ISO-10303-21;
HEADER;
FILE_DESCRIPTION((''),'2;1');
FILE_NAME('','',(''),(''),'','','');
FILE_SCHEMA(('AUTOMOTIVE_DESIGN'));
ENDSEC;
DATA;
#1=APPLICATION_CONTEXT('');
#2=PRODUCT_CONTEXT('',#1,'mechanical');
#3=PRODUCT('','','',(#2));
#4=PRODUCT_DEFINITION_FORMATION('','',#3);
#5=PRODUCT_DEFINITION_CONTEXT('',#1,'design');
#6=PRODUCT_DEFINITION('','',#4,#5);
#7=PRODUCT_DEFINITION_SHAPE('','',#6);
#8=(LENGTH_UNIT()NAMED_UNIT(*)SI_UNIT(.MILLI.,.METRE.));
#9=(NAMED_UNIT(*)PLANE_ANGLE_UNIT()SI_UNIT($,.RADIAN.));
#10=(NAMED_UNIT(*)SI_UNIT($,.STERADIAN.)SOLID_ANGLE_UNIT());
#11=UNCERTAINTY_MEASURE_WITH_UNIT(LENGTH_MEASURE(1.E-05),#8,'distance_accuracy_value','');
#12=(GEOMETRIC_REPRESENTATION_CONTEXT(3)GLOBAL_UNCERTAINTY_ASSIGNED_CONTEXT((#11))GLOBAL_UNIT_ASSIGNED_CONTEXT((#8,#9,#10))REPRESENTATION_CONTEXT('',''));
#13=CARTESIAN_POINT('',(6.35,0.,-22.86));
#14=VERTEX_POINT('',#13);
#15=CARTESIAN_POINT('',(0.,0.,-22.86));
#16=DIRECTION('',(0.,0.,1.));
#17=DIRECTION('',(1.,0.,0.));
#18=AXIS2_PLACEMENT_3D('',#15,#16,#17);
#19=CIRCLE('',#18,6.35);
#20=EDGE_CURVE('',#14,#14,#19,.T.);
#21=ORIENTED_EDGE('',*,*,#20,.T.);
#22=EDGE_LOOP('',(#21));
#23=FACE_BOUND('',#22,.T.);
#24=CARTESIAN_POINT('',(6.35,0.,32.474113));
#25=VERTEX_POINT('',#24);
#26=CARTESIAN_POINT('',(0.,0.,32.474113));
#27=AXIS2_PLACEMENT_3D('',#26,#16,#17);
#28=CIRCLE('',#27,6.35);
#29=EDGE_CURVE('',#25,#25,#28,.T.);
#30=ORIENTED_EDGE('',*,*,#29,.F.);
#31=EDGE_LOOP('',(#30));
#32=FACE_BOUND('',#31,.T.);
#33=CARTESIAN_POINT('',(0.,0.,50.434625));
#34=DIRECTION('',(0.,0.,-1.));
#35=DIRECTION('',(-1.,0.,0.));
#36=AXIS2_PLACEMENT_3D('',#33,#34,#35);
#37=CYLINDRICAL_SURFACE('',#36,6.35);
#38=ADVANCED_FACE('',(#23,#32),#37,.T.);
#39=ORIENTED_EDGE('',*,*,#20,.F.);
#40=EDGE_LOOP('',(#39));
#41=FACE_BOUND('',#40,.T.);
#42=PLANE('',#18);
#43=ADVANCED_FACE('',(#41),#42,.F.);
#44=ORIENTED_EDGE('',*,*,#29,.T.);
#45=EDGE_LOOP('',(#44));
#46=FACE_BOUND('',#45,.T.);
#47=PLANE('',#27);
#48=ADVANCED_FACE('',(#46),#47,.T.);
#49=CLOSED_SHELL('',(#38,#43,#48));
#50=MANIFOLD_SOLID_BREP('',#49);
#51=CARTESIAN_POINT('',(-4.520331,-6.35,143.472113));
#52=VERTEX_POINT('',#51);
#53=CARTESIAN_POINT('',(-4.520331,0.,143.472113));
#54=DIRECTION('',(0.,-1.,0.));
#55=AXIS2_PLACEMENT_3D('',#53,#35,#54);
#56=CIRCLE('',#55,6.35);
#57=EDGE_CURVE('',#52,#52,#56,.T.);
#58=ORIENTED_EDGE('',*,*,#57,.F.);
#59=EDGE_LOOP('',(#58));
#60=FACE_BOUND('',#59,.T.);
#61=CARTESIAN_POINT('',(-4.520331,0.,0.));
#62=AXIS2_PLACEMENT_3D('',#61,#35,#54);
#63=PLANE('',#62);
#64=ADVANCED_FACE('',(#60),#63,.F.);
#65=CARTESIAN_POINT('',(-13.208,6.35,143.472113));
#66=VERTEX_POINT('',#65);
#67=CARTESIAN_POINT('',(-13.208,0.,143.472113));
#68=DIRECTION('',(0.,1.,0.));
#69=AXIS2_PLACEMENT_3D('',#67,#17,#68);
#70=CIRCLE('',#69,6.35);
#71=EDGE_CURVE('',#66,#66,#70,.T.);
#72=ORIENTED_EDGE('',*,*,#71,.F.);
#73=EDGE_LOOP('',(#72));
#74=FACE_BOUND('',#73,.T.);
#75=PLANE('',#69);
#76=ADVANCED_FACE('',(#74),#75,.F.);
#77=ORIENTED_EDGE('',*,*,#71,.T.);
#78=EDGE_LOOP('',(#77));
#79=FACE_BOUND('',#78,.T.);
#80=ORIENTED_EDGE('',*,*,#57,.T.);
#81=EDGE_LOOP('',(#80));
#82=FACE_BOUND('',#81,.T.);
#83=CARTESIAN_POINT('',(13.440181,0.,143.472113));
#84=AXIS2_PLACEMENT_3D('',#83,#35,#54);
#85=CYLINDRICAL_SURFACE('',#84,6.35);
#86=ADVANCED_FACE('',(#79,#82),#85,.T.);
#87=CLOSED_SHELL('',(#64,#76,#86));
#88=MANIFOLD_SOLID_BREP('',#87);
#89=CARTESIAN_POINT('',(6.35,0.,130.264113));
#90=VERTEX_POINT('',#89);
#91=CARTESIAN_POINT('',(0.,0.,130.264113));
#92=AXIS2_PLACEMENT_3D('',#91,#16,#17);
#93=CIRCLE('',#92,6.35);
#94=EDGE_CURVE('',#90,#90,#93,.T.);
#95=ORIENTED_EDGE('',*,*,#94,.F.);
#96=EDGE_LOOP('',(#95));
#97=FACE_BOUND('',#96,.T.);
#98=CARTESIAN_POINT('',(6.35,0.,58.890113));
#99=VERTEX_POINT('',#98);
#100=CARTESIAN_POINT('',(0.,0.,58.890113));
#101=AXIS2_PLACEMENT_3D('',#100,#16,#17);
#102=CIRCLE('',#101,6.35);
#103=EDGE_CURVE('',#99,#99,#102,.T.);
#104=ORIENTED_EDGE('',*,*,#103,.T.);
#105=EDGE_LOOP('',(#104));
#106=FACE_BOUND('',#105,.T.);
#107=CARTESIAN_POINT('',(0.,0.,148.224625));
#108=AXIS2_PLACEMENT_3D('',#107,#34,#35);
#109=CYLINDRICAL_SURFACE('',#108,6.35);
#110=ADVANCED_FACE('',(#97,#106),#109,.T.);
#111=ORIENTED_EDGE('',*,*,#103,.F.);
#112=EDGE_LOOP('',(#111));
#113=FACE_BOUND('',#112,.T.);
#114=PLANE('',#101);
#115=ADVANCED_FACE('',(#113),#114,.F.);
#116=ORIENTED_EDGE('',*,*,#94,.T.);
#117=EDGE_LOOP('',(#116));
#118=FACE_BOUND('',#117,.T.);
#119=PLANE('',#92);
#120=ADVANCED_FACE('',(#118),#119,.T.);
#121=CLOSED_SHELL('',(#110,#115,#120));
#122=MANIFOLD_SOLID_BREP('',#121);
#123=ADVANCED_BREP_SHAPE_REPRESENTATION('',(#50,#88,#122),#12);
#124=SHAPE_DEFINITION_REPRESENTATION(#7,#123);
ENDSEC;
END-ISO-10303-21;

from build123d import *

# Parameters (mm, degrees)
BOSS_EXTRUDE1_OUTLINE_R = 6.35
BOSS_EXTRUDE1_DEPTH     = 55.334112963
SKETCH3_R               = 6.35
BOSS_EXTRUDE2_DEPTH     = 71.374
SKETCH4_R               = 6.350000006
BOSS_EXTRUDE3_DEPTH     = 8.687669


# Read off the part's stored shape, not the designer's step: Boss-Extrude1
with BuildPart() as part:
    # Boss-Extrude1 outline → Boss-Extrude1 (new body)
    with BuildSketch(Plane.XY.offset(-22.86)):
        Circle(BOSS_EXTRUDE1_OUTLINE_R)
    extrude(amount=BOSS_EXTRUDE1_DEPTH)


with BuildPart() as body_2:
    # Sketch3 → Boss-Extrude2 (new body)
    with BuildSketch(Plane.XY.offset(58.890112963)):
        Circle(SKETCH3_R)
    extrude(amount=BOSS_EXTRUDE2_DEPTH)


with BuildPart() as body_3:
    # Sketch4 → Boss-Extrude3 (new body)
    with BuildSketch(Plane(origin=(-13.208, 0, 0), x_dir=(0, 0, -1), z_dir=(1, 0, 0))):
        with Locations(Location((-143.472112963, 0, 0), (0, 0, 270))):
            Circle(SKETCH4_R)
    extrude(amount=BOSS_EXTRUDE3_DEPTH)


solid = Compound([part.part, body_2.part, body_3.part])
